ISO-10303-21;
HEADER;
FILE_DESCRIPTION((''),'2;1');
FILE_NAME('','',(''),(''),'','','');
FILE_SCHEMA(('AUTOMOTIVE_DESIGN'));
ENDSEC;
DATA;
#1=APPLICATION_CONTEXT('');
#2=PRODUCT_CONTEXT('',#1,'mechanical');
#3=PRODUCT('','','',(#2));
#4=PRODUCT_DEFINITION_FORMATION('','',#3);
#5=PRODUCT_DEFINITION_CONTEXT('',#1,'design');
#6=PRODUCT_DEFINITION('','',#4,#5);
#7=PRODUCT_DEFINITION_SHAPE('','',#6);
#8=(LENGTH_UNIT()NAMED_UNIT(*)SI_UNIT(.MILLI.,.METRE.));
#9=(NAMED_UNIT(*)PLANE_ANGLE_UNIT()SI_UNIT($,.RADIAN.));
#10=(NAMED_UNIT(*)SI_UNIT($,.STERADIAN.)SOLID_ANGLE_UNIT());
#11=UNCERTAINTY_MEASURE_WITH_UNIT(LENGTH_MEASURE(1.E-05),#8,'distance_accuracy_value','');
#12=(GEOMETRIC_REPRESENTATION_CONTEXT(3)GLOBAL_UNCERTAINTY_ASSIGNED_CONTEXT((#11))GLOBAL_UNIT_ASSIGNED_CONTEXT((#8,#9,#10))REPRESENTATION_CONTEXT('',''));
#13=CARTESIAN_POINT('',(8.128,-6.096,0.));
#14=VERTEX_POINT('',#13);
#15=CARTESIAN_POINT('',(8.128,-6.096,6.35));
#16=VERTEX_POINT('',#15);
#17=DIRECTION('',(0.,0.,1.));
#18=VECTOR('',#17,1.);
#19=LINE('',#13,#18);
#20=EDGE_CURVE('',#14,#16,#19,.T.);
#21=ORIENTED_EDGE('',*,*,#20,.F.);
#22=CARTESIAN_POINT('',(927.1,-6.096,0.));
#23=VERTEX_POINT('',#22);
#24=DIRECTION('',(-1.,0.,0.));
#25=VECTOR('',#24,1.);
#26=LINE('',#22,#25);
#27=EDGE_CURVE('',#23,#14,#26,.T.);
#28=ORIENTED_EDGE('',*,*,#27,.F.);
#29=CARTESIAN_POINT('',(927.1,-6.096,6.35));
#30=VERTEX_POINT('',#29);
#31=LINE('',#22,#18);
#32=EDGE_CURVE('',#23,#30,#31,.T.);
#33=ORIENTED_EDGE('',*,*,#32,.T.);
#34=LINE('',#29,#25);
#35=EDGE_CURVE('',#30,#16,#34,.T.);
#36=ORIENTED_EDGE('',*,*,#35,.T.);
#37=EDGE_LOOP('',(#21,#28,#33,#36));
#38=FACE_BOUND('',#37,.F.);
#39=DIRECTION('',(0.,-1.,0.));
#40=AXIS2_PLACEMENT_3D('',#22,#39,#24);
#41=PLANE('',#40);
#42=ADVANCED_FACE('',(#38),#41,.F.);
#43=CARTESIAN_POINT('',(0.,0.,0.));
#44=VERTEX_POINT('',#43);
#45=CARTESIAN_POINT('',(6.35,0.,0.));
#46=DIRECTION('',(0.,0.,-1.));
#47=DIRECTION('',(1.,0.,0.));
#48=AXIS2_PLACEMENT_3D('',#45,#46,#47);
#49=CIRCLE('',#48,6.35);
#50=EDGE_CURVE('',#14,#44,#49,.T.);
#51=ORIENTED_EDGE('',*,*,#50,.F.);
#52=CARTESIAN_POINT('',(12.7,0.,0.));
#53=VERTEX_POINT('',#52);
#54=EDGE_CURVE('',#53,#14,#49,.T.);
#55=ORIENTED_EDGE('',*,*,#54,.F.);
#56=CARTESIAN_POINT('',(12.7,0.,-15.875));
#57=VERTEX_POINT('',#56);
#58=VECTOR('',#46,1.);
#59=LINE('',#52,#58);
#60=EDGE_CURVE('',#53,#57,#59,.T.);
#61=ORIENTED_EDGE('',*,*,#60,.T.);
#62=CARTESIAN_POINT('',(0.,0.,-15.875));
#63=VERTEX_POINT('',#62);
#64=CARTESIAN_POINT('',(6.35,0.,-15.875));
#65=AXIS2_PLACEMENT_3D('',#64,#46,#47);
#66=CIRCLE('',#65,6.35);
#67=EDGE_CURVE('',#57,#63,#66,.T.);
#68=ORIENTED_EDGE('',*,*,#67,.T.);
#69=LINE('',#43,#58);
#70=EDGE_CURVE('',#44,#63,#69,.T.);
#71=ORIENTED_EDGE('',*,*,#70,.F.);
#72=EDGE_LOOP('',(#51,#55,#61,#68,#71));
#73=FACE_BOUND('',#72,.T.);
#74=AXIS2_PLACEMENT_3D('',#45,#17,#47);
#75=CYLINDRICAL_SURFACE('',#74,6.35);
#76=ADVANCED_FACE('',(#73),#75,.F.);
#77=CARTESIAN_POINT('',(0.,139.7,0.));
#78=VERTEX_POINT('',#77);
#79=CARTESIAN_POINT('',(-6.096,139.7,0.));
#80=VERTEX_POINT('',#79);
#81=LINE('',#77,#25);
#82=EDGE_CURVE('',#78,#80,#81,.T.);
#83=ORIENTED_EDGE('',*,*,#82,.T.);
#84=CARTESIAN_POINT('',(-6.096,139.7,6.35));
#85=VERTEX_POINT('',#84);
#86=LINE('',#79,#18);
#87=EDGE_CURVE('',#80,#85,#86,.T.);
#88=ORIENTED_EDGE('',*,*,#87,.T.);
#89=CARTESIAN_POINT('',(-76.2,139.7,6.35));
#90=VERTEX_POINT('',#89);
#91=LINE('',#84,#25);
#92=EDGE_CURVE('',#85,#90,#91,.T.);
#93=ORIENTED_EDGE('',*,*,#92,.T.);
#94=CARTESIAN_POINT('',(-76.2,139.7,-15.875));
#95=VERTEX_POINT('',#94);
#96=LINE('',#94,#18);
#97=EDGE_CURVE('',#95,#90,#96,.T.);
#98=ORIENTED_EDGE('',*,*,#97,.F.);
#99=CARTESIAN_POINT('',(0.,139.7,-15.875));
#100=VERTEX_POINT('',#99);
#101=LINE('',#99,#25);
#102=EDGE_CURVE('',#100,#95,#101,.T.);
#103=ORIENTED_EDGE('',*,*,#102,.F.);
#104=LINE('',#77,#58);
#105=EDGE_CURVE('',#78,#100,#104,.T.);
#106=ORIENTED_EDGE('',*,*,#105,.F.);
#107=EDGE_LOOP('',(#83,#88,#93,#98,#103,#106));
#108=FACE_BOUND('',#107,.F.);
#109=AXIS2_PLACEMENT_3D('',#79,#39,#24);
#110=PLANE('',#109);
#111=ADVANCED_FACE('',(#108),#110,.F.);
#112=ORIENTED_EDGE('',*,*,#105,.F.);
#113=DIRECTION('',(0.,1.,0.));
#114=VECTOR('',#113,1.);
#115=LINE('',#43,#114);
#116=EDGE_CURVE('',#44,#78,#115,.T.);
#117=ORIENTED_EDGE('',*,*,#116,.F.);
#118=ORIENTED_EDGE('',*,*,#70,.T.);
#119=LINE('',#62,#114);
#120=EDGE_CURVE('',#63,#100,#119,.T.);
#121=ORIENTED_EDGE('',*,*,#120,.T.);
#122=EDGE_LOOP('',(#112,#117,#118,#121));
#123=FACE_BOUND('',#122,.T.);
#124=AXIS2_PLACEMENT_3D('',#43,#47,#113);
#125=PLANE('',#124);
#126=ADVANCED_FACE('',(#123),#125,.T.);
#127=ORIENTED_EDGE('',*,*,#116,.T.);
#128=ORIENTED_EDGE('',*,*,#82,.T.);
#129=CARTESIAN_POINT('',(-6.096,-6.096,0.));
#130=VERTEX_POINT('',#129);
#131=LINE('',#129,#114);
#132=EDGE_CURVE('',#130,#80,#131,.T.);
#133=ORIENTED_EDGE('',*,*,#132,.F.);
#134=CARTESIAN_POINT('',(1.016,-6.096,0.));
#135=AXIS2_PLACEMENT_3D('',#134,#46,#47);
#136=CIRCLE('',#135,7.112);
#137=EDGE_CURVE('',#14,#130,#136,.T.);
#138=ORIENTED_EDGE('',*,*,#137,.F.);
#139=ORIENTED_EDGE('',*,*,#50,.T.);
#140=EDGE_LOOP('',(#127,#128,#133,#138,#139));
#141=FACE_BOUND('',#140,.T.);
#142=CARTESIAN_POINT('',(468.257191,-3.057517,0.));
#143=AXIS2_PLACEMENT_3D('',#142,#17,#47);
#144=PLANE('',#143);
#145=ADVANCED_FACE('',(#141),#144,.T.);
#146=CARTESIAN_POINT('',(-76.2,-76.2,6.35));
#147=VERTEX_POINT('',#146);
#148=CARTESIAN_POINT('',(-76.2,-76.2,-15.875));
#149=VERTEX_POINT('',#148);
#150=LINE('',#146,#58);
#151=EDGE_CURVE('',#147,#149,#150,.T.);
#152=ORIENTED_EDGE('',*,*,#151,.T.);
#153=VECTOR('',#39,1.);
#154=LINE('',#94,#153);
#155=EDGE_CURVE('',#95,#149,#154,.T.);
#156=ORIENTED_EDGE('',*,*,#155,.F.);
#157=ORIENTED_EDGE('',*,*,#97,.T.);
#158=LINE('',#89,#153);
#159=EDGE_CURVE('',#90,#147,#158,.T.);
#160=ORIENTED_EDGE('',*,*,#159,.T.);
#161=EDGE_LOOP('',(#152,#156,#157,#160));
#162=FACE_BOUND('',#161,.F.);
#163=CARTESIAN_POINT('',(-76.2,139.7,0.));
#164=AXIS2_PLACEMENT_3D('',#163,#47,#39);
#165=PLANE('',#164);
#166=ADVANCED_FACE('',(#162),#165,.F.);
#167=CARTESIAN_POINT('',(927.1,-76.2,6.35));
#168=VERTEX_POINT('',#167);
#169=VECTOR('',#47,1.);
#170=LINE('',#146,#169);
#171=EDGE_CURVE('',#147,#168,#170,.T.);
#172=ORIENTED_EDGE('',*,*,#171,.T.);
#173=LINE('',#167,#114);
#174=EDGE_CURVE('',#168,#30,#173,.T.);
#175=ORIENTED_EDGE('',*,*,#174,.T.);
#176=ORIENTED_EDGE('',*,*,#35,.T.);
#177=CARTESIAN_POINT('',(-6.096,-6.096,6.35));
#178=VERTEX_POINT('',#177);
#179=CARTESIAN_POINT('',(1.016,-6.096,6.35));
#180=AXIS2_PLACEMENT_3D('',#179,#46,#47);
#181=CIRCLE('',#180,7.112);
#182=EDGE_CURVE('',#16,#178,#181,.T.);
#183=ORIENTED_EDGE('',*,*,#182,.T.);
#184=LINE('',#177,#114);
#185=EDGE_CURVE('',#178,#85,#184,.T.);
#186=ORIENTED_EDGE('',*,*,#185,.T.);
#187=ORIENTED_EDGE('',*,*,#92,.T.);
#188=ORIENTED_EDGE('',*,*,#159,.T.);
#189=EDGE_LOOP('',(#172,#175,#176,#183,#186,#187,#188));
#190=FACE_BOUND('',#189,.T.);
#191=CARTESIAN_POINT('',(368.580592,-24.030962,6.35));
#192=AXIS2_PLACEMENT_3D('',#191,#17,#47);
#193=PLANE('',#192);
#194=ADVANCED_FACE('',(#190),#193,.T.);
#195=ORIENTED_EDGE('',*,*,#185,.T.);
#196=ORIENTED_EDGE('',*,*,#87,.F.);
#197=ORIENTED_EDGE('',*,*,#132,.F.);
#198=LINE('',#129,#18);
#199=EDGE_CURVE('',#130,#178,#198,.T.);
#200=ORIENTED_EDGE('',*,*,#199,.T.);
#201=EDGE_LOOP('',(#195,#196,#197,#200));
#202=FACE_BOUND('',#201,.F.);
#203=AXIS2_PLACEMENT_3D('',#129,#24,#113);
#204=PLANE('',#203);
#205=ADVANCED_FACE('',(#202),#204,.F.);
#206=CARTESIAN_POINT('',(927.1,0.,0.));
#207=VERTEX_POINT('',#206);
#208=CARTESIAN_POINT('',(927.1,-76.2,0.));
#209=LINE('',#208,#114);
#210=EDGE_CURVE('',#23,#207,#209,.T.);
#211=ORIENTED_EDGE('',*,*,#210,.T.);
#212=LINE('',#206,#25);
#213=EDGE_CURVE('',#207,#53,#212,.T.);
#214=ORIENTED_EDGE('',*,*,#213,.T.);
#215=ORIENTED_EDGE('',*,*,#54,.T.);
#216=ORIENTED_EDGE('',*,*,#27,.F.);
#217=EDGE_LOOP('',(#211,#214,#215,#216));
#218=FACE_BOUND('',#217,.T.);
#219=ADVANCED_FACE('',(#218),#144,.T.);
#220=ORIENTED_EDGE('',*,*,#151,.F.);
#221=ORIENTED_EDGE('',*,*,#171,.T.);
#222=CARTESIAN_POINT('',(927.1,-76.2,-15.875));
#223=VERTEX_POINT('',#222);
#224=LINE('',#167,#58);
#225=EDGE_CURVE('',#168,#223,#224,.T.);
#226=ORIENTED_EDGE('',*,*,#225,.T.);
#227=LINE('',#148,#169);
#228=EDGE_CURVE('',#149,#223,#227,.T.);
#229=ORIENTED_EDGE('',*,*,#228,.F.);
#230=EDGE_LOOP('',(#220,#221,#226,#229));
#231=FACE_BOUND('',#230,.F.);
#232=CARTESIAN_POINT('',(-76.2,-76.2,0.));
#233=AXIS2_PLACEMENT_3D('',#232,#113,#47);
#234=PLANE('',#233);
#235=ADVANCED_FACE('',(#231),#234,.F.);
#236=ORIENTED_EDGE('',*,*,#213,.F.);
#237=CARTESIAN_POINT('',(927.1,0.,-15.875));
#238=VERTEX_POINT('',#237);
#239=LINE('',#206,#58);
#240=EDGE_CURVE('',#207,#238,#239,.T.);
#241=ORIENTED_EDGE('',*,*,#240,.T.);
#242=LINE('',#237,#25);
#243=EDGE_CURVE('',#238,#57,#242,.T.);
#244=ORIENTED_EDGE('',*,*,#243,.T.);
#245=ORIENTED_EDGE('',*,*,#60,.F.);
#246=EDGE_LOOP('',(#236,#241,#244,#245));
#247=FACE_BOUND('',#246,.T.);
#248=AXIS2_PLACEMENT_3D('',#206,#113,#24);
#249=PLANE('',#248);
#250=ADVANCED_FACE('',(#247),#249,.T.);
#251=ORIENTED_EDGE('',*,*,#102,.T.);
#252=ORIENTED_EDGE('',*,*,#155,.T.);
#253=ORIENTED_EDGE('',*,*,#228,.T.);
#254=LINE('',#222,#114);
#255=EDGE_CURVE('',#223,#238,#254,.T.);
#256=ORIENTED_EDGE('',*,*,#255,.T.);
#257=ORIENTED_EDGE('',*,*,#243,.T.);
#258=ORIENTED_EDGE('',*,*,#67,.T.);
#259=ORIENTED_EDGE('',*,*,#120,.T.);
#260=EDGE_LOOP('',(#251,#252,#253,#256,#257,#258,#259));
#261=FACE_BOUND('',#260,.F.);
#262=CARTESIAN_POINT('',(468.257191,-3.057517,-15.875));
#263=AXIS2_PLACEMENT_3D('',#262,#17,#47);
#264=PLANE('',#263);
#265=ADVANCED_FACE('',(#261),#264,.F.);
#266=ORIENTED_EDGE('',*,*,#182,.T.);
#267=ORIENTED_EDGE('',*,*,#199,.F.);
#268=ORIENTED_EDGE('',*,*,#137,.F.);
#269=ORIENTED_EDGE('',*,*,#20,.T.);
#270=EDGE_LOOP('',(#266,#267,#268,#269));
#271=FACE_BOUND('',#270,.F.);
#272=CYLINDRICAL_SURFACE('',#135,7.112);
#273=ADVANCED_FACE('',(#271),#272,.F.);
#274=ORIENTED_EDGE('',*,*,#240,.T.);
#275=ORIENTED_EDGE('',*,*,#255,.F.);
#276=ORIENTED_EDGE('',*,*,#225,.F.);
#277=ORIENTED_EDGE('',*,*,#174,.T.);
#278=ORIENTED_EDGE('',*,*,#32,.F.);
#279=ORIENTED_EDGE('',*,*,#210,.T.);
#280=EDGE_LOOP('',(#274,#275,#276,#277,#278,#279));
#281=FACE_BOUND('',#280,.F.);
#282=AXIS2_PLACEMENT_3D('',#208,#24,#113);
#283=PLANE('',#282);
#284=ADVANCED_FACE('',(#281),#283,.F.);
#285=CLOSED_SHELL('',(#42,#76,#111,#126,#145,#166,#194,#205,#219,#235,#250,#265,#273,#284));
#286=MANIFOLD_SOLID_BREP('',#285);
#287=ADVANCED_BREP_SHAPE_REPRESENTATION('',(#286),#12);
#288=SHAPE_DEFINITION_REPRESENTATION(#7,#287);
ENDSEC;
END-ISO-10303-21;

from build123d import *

# Parameters (mm, degrees)
F1_DEPTH = 15.875
F2_DEPTH = 6.35


# Not quite as in the source:
# - a length typed as a fraction of an inch, garbled in the dataset ("3 / 203.2 mm" for 3/8 in), is restored


with BuildPart() as f1:
    # F0 (on Top) → F1 (new body)
    with BuildSketch(Plane.XY):
        with BuildLine():
            Line((927.1, 0), (12.7, 0))
            ThreePointArc((12.7, 0), (11.43, -3.81), (8.128, -6.096))
            Line((8.128, -6.096), (927.1, -6.096))
            Line((927.1, -6.096), (927.1, 0))
        make_face()
        with BuildLine():
            Line((927.1, -6.096), (8.128, -6.096))
            ThreePointArc((8.128, -6.096), (1.016, -13.208), (-6.096, -6.096))
            Line((-6.096, -6.096), (-6.096, 139.7))
            Line((-6.096, 139.7), (-76.2, 139.7))
            Line((-76.2, 139.7), (-76.2, -76.2))
            Line((-76.2, -76.2), (927.1, -76.2))
            Line((927.1, -76.2), (927.1, -6.096))
        make_face()
        with BuildLine():
            ThreePointArc((-6.096, -6.096), (1.016, -13.208), (8.128, -6.096))
            ThreePointArc((8.128, -6.096), (2.54, -5.08), (0, 0))
            Line((0, 0), (0, 139.7))
            Line((0, 139.7), (-6.096, 139.7))
            Line((-6.096, 139.7), (-6.096, -6.096))
        make_face()
    extrude(amount=-F1_DEPTH)

    # F0 (on Top) → F2 (join)
    with BuildSketch(Plane.XY):
        with BuildLine():
            Line((927.1, -6.096), (8.128, -6.096))
            ThreePointArc((8.128, -6.096), (1.016, -13.208), (-6.096, -6.096))
            Line((-6.096, -6.096), (-6.096, 139.7))
            Line((-6.096, 139.7), (-76.2, 139.7))
            Line((-76.2, 139.7), (-76.2, -76.2))
            Line((-76.2, -76.2), (927.1, -76.2))
            Line((927.1, -76.2), (927.1, -6.096))
        make_face()
    extrude(amount=F2_DEPTH)


solid = f1.part
